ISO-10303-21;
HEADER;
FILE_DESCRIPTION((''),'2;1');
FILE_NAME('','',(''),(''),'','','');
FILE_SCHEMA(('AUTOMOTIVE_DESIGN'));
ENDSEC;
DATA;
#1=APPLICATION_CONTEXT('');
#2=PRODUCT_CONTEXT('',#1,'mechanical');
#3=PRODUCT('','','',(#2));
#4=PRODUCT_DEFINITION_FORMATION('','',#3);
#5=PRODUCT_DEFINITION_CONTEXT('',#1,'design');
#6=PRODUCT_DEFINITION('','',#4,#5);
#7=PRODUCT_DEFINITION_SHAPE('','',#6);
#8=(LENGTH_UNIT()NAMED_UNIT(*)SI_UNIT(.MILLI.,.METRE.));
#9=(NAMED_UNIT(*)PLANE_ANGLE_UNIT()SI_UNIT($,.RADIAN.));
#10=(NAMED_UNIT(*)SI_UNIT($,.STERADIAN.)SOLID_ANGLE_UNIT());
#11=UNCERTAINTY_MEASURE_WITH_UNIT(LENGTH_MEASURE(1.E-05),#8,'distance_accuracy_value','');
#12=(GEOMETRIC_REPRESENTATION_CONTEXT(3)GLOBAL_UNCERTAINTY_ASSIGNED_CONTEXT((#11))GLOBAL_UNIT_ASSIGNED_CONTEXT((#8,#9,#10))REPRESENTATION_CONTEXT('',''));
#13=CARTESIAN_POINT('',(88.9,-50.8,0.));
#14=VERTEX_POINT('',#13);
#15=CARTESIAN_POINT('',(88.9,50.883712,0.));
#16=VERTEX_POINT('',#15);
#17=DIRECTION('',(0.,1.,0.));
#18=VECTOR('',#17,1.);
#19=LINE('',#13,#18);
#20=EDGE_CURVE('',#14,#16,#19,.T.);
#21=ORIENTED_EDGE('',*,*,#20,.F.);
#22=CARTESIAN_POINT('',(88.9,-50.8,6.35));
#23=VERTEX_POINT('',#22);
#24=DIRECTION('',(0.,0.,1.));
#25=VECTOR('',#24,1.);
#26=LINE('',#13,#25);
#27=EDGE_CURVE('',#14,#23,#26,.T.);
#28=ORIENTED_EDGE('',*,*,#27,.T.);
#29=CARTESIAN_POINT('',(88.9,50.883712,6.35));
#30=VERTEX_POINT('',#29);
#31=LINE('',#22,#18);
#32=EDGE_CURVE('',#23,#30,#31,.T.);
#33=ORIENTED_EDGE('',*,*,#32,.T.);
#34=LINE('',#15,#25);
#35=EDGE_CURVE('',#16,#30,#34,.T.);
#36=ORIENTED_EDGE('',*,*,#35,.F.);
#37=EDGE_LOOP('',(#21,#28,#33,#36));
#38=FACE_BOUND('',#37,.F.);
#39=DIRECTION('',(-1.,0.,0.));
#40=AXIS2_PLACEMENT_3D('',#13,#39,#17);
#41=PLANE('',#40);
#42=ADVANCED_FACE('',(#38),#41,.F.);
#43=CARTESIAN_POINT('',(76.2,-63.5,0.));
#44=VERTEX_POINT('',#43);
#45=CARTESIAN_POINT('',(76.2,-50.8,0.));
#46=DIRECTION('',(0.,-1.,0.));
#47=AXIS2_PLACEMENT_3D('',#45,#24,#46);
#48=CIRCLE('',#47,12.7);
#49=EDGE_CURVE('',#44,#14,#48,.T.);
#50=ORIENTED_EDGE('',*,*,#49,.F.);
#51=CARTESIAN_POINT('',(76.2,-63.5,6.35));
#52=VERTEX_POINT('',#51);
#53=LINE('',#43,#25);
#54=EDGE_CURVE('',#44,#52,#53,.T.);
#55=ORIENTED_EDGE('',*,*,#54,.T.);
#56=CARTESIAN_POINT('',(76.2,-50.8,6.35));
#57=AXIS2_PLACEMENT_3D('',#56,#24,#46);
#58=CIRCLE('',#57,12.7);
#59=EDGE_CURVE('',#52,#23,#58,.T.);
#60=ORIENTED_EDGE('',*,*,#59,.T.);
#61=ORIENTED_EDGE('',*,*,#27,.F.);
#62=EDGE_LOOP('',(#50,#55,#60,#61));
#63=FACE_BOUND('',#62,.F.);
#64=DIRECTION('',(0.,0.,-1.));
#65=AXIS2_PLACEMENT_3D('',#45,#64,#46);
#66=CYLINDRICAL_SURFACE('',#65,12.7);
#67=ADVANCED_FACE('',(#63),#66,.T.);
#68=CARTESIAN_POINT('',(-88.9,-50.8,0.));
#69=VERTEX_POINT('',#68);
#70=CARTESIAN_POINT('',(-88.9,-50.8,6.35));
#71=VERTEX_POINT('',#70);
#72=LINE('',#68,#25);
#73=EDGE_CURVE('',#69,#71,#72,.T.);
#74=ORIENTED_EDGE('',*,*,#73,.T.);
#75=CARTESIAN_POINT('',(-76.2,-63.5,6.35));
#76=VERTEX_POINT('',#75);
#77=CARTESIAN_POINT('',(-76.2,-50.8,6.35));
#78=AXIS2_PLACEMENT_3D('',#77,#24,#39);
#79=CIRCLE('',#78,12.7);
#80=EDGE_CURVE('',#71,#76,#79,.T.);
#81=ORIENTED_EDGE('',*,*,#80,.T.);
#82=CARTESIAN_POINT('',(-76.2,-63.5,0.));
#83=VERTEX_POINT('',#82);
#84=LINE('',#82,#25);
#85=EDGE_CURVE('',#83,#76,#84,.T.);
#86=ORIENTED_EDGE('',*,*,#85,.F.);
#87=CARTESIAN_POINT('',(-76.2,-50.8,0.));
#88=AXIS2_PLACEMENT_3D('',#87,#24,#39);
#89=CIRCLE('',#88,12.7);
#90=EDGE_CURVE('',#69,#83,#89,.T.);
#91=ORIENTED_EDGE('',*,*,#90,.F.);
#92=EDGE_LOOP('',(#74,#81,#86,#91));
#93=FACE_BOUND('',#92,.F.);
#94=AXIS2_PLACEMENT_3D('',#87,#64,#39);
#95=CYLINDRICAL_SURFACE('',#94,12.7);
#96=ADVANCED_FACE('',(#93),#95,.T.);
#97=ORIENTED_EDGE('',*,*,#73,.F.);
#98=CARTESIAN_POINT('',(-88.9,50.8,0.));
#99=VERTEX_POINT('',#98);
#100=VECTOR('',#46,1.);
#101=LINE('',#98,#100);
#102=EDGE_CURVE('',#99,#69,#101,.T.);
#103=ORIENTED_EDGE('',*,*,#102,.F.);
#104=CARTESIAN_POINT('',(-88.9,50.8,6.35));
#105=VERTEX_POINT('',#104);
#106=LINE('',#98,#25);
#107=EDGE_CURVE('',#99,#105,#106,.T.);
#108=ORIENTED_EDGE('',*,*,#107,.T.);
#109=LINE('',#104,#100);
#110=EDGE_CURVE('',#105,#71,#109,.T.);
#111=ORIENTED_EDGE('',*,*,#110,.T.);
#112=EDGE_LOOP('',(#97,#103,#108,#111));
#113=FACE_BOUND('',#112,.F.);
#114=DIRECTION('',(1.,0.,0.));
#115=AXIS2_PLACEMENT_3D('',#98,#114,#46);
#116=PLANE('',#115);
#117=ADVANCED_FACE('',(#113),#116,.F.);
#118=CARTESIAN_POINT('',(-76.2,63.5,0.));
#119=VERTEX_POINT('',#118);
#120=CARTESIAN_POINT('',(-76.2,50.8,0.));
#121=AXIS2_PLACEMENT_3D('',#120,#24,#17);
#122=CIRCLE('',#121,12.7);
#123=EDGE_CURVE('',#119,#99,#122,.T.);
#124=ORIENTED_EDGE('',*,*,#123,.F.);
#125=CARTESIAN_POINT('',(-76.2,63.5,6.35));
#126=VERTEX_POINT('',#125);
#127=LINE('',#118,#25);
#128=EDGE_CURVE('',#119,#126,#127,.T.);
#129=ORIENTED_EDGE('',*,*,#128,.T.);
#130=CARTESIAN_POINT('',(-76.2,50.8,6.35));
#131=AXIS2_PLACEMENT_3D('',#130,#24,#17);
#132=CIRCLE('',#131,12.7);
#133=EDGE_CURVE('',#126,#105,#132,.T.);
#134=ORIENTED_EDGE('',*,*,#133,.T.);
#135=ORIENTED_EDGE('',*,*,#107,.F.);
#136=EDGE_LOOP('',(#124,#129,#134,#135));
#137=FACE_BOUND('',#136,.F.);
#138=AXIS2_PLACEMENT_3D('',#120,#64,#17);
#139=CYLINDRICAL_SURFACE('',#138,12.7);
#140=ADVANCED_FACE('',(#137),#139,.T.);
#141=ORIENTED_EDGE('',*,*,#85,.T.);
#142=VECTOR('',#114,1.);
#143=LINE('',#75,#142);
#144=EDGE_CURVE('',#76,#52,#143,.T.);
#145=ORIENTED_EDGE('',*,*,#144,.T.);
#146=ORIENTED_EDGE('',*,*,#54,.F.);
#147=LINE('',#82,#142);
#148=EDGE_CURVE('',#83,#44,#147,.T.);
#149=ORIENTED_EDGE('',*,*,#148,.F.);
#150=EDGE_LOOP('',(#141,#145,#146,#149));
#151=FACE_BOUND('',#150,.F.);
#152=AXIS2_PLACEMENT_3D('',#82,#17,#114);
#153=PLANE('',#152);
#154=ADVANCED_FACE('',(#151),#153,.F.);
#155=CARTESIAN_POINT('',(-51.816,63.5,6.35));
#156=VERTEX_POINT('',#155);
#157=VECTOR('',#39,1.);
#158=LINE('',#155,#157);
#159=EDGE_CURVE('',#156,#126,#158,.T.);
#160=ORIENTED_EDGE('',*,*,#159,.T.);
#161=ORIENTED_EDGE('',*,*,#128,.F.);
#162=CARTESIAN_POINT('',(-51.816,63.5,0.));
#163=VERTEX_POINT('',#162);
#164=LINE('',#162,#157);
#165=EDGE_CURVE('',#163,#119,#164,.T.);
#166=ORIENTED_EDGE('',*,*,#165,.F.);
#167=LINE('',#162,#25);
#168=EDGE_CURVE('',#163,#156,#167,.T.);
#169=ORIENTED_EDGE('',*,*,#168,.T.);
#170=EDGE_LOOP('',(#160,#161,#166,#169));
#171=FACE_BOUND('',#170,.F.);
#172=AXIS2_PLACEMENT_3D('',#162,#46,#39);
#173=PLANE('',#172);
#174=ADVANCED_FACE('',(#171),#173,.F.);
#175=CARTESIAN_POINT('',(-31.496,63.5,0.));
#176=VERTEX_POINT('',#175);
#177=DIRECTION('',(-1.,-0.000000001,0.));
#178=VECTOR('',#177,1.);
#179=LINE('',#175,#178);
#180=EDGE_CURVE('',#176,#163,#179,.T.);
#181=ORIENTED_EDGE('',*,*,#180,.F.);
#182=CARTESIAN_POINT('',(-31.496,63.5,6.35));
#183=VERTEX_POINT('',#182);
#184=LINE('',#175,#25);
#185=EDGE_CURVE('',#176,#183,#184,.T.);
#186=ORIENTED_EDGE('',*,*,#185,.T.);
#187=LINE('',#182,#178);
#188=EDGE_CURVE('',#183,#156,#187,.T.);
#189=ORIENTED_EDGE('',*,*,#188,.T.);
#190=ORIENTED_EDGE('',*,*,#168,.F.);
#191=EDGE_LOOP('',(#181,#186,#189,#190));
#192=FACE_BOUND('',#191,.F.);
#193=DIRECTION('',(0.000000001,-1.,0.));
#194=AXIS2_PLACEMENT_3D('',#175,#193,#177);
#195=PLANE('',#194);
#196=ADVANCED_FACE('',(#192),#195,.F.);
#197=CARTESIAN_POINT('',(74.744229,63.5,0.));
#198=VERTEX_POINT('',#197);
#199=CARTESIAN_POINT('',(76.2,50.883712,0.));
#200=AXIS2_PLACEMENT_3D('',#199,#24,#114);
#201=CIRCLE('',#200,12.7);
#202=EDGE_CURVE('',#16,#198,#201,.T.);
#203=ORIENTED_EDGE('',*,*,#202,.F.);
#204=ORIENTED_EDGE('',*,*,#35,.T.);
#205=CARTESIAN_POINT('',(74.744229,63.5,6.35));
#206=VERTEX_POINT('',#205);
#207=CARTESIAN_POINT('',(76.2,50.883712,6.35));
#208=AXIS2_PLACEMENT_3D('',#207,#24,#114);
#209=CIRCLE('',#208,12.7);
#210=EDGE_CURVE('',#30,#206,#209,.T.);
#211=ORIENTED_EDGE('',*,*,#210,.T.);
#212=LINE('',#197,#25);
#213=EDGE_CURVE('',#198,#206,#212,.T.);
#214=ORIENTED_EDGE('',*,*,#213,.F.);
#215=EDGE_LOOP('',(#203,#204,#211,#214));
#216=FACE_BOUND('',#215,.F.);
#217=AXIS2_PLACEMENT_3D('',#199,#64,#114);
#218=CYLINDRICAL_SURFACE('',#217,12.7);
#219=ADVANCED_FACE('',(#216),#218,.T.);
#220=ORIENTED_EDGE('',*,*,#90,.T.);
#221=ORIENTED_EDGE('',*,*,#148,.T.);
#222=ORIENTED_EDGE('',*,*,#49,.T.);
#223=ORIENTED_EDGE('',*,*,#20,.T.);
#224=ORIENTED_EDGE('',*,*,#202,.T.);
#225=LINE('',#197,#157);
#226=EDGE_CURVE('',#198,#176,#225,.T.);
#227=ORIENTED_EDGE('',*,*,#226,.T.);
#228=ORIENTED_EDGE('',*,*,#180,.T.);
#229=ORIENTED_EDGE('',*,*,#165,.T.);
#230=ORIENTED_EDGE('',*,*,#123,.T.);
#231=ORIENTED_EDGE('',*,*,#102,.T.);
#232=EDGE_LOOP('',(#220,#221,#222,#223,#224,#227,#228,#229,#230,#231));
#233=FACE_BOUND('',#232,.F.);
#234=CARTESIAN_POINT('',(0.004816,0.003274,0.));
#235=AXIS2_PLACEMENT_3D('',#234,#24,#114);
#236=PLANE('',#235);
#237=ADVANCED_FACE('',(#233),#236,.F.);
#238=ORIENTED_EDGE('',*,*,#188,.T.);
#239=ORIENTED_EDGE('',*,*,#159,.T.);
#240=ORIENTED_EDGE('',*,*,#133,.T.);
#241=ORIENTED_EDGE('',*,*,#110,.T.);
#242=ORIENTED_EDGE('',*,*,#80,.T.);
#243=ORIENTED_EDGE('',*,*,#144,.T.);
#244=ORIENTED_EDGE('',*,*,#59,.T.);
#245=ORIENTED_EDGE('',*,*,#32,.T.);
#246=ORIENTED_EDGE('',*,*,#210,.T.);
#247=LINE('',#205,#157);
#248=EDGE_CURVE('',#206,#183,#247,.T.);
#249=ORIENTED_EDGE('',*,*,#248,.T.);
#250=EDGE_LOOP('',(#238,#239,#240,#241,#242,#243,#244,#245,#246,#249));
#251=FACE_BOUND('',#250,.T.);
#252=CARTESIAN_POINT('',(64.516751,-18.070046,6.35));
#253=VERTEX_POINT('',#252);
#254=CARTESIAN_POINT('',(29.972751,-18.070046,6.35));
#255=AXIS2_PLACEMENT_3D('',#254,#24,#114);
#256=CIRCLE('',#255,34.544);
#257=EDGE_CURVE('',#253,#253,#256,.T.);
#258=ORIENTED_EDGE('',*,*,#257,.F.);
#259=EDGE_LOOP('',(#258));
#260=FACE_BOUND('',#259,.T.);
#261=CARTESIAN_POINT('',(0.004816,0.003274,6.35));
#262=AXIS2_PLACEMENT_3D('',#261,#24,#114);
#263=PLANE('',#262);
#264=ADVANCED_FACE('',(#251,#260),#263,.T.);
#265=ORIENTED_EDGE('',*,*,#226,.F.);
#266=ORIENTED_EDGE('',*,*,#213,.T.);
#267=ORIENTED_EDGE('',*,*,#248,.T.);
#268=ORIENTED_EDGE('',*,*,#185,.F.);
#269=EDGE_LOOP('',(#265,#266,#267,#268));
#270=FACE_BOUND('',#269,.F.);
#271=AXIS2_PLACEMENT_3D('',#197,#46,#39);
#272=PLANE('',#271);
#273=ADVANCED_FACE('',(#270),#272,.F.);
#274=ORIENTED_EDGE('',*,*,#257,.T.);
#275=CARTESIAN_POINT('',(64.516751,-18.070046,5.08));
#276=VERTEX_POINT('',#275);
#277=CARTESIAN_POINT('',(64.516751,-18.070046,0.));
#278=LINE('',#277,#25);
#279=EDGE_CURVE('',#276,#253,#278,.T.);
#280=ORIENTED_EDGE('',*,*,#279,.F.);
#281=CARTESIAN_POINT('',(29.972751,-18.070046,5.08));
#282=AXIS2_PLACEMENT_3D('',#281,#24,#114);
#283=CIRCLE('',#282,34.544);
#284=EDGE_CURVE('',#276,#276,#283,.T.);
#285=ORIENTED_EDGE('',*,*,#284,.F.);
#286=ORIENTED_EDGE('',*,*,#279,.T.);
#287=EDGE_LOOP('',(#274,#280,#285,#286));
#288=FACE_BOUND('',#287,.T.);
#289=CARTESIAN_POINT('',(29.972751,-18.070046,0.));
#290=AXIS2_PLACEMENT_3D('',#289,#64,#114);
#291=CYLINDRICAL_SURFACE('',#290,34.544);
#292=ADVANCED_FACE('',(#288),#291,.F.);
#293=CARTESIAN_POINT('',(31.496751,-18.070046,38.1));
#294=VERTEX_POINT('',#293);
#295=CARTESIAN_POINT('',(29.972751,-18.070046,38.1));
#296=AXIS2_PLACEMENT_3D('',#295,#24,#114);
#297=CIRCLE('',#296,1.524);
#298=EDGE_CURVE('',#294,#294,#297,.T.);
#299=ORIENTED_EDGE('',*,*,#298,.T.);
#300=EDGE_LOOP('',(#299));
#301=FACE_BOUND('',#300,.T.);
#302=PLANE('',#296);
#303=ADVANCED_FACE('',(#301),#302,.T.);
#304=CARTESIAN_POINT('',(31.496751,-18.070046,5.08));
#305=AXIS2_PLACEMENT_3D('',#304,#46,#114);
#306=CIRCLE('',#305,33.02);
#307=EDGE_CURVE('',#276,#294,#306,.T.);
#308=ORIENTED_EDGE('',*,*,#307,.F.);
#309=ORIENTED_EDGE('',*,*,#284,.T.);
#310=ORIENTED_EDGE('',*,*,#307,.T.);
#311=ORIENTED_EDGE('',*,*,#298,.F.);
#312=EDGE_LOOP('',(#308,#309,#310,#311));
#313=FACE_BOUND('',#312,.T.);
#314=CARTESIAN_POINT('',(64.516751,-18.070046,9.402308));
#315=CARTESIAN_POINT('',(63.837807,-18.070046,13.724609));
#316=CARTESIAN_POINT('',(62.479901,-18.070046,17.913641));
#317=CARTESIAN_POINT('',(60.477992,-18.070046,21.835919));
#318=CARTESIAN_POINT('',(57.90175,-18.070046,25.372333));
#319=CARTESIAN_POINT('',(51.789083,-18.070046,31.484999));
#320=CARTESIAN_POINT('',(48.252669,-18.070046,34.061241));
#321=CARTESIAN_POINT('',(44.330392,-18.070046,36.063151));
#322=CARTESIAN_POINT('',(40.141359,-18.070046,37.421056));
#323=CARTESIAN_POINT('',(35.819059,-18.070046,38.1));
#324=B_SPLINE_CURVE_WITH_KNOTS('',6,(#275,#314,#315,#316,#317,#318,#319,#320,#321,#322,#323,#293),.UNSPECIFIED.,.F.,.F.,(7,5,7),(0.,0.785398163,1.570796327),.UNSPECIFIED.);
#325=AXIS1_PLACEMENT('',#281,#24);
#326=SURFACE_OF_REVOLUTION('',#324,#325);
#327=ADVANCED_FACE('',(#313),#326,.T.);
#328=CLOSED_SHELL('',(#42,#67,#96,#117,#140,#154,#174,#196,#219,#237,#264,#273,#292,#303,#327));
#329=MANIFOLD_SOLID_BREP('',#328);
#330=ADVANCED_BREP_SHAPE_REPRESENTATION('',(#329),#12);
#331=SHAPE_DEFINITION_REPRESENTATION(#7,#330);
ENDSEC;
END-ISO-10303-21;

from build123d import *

# Parameters (mm, degrees)
F0_R     = 34.544
F1_DEPTH = 38.1
F2_R     = 33.02
F4_DEPTH = 6.35


# Not quite as in the source:
# - the program builds the solid bodies; features that only make, move or delete a surface that nothing else refers to are left out


with BuildPart() as f1:
    # F0 (on Top) → F1 (new body)
    with BuildSketch(Plane.XY):
        with Locations((29.9727506936, -18.0700458586)):
            Circle(F0_R)
    extrude(amount=F1_DEPTH)

    # F2
    f2_edges = [f1.edges().sort_by_distance(p)[0] for p in [
        (-4.571249, -18.070046, 38.1),
    ]]
    fillet(f2_edges, radius=F2_R)

    # F0 (on Top) → F4 (join)
    with BuildSketch(Plane.XY):
        with BuildLine():
            Line((-76.2, -63.5), (76.2, -63.5))
            ThreePointArc((76.2, -63.5), (85.1802561211, -59.7802561211), (88.9, -50.8))
            Line((88.9, -50.8), (88.9, 50.8837117301))
            ThreePointArc((88.9, 50.8837117301), (84.6499025139, 60.364700471), (74.7442287394, 63.500000013))
            Line((74.7442287394, 63.500000013), (-31.496, 63.500000013))
            Line((-31.496, 63.500000013), (-51.816, 63.5))
            Line((-51.816, 63.5), (-76.2, 63.5))
            ThreePointArc((-76.2, 63.5), (-85.1802561211, 59.7802561211), (-88.9, 50.8))
            Line((-88.9, 50.8), (-88.9, -50.8))
            ThreePointArc((-88.9, -50.8), (-85.1802561211, -59.7802561211), (-76.2, -63.5))
        make_face()
        with Locations((29.9727506936, -18.0700458586)):
            Circle(F0_R, mode=Mode.SUBTRACT)
    extrude(amount=F4_DEPTH)


solid = f1.part
